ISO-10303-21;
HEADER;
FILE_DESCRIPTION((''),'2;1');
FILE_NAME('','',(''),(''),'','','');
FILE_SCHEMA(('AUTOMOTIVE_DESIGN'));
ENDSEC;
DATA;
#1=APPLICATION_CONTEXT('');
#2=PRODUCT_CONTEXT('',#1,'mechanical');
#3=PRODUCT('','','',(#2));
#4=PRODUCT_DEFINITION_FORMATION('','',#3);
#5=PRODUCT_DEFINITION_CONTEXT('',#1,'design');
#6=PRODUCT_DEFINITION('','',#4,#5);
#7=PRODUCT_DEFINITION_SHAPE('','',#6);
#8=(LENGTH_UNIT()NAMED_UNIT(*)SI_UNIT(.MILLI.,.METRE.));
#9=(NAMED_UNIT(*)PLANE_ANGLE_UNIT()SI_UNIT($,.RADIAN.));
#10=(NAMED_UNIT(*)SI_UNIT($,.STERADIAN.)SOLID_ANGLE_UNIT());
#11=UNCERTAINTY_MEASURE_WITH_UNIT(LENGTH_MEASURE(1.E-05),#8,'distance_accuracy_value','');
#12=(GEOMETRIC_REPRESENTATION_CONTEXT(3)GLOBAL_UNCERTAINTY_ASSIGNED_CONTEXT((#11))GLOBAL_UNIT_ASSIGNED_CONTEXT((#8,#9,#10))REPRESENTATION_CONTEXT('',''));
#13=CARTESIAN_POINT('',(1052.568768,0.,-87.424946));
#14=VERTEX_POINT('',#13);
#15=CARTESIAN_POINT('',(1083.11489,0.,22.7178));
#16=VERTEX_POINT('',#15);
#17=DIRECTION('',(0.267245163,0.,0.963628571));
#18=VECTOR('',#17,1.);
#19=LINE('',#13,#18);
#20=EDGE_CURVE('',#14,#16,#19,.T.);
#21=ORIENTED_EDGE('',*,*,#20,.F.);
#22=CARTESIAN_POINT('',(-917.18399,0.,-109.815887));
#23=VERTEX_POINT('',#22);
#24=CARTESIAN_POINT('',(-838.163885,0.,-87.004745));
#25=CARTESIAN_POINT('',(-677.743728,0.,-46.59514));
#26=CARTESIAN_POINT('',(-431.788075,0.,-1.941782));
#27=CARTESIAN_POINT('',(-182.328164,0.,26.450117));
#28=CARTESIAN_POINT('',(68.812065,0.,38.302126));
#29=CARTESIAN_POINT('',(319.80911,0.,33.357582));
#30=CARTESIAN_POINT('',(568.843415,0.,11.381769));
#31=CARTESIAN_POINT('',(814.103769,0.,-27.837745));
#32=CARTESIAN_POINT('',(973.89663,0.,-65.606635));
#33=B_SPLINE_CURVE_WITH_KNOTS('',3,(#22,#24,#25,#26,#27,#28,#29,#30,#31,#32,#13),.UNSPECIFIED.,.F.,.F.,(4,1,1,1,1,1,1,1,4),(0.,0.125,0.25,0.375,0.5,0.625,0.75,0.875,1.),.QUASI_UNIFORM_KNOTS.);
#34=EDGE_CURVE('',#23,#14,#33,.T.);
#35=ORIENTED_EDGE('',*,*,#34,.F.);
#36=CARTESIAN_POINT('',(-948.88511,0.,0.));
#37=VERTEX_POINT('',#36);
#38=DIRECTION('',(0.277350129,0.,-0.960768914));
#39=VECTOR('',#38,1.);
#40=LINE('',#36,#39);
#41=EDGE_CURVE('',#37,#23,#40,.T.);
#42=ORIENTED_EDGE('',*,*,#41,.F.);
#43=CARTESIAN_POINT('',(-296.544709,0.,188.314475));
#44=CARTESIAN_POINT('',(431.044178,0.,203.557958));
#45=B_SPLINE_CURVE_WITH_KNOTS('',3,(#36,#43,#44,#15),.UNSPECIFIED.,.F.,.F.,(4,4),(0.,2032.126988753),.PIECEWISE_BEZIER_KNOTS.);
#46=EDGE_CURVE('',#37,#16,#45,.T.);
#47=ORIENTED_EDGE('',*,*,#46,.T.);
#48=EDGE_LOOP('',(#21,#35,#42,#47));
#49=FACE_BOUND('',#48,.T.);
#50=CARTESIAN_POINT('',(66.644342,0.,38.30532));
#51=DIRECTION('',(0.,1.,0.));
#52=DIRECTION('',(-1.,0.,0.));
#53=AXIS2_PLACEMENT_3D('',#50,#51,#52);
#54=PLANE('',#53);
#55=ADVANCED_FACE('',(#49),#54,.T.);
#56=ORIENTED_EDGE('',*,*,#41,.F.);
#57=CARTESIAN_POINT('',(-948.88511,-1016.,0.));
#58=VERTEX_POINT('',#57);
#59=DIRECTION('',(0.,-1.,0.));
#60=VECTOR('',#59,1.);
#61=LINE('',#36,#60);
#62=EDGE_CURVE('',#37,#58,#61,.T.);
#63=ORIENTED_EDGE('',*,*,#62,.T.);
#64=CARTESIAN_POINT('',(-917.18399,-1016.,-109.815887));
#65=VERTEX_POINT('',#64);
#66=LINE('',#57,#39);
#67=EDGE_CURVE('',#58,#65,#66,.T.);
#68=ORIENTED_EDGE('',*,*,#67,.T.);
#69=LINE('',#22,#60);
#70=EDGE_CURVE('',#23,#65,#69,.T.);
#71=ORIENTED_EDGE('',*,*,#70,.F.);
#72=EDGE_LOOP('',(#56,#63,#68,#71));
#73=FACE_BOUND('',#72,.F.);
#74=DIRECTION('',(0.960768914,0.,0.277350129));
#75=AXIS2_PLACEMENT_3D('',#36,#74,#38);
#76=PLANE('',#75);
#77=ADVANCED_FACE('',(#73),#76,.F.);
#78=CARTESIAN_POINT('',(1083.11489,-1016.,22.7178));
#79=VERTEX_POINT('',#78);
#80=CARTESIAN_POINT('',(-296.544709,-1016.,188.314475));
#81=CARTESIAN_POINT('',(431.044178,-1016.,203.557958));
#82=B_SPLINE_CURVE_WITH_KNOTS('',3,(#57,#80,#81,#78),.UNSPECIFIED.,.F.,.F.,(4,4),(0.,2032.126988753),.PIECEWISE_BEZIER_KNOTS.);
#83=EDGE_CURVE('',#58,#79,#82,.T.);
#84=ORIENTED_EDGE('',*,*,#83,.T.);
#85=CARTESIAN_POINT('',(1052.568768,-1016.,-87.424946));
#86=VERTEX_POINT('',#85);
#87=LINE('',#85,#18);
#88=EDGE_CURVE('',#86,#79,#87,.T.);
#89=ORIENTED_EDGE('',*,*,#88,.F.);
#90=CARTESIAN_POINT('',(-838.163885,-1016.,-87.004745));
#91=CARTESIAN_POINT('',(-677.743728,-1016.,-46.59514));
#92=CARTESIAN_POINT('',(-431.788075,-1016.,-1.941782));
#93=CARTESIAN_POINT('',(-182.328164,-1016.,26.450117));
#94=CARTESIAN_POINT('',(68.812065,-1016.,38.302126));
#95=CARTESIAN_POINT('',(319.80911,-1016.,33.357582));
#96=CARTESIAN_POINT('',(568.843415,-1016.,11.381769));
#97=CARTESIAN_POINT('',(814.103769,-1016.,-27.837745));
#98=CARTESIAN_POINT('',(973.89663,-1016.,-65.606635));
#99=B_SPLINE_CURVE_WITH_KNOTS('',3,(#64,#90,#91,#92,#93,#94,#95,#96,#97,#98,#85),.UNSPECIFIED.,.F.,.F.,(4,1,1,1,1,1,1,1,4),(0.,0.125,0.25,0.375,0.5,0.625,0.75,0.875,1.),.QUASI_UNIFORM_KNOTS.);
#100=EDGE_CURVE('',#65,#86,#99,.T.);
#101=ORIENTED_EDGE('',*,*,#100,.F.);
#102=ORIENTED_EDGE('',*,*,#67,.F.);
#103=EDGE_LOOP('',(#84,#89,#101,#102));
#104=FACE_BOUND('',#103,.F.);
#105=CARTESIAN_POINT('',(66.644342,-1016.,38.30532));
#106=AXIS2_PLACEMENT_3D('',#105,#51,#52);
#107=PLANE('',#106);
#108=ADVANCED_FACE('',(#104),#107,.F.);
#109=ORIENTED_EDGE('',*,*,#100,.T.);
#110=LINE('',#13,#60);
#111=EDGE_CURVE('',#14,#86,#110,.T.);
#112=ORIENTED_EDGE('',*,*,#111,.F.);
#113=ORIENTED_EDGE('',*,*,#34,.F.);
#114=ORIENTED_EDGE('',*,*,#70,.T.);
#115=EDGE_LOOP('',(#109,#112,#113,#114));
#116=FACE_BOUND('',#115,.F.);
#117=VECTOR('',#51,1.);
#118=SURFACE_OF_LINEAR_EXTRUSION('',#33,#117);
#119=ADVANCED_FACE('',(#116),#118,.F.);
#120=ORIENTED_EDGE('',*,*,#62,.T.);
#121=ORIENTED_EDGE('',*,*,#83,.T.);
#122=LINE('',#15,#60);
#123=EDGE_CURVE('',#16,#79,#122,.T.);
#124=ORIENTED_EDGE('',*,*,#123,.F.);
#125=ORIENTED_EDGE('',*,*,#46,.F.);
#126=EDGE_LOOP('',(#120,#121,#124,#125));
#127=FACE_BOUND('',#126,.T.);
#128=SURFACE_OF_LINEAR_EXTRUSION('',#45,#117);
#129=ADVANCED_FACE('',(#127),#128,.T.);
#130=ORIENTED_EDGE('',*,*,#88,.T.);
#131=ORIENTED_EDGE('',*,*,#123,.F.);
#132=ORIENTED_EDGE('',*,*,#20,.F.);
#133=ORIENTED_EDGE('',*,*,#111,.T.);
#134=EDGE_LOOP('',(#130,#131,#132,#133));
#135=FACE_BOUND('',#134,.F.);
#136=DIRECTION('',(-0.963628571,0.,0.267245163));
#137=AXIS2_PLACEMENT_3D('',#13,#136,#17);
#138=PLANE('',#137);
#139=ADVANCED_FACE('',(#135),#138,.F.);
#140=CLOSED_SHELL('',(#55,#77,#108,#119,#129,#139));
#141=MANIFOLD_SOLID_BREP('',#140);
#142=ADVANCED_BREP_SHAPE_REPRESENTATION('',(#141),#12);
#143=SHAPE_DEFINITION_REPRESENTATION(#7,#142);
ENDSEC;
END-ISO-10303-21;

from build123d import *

# Parameters (mm, degrees)
F1_DEPTH = 1016


with BuildPart() as f1:
    # F0 (on Front) → F1 (new body)
    with BuildSketch(Plane.XZ):
        with BuildLine():
            add(Edge.make_bspline(
                [(-948.8851096128, 0), (-296.5447090113, 188.3144754409), (431.0441784436, 203.5579582314), (1083.1148903872, 22.7177995874)],
                knots=[0, 0, 0, 0, 2032.1269887529, 2032.1269887529, 2032.1269887529, 2032.1269887529], degree=3))
            Line((-948.8851096128, 0), (-917.1839899029, -109.8158868704))
            add(Edge.make_bspline(
                [(-917.1839899029, -109.8158868704), (-838.1638847431, -87.0047446528), (-677.7437282731, -46.595139966), (-431.7880751926, -1.941782143), (-182.328163559, 26.4501167169), (68.812065297, 38.3021262725), (319.8091103509, 33.3575818517), (568.8434154703, 11.3817690533), (814.1037690507, -27.8377449472), (973.896630374, -65.6066346054), (1052.5687682639, -87.4249460803)],
                knots=[0, 0, 0, 0, 0.125, 0.25, 0.375, 0.5, 0.625, 0.75, 0.875, 1, 1, 1, 1], degree=3))
            Line((1052.5687682639, -87.4249460803), (1083.1148903872, 22.7177995874))
        make_face()
    extrude(amount=F1_DEPTH)


solid = f1.part
